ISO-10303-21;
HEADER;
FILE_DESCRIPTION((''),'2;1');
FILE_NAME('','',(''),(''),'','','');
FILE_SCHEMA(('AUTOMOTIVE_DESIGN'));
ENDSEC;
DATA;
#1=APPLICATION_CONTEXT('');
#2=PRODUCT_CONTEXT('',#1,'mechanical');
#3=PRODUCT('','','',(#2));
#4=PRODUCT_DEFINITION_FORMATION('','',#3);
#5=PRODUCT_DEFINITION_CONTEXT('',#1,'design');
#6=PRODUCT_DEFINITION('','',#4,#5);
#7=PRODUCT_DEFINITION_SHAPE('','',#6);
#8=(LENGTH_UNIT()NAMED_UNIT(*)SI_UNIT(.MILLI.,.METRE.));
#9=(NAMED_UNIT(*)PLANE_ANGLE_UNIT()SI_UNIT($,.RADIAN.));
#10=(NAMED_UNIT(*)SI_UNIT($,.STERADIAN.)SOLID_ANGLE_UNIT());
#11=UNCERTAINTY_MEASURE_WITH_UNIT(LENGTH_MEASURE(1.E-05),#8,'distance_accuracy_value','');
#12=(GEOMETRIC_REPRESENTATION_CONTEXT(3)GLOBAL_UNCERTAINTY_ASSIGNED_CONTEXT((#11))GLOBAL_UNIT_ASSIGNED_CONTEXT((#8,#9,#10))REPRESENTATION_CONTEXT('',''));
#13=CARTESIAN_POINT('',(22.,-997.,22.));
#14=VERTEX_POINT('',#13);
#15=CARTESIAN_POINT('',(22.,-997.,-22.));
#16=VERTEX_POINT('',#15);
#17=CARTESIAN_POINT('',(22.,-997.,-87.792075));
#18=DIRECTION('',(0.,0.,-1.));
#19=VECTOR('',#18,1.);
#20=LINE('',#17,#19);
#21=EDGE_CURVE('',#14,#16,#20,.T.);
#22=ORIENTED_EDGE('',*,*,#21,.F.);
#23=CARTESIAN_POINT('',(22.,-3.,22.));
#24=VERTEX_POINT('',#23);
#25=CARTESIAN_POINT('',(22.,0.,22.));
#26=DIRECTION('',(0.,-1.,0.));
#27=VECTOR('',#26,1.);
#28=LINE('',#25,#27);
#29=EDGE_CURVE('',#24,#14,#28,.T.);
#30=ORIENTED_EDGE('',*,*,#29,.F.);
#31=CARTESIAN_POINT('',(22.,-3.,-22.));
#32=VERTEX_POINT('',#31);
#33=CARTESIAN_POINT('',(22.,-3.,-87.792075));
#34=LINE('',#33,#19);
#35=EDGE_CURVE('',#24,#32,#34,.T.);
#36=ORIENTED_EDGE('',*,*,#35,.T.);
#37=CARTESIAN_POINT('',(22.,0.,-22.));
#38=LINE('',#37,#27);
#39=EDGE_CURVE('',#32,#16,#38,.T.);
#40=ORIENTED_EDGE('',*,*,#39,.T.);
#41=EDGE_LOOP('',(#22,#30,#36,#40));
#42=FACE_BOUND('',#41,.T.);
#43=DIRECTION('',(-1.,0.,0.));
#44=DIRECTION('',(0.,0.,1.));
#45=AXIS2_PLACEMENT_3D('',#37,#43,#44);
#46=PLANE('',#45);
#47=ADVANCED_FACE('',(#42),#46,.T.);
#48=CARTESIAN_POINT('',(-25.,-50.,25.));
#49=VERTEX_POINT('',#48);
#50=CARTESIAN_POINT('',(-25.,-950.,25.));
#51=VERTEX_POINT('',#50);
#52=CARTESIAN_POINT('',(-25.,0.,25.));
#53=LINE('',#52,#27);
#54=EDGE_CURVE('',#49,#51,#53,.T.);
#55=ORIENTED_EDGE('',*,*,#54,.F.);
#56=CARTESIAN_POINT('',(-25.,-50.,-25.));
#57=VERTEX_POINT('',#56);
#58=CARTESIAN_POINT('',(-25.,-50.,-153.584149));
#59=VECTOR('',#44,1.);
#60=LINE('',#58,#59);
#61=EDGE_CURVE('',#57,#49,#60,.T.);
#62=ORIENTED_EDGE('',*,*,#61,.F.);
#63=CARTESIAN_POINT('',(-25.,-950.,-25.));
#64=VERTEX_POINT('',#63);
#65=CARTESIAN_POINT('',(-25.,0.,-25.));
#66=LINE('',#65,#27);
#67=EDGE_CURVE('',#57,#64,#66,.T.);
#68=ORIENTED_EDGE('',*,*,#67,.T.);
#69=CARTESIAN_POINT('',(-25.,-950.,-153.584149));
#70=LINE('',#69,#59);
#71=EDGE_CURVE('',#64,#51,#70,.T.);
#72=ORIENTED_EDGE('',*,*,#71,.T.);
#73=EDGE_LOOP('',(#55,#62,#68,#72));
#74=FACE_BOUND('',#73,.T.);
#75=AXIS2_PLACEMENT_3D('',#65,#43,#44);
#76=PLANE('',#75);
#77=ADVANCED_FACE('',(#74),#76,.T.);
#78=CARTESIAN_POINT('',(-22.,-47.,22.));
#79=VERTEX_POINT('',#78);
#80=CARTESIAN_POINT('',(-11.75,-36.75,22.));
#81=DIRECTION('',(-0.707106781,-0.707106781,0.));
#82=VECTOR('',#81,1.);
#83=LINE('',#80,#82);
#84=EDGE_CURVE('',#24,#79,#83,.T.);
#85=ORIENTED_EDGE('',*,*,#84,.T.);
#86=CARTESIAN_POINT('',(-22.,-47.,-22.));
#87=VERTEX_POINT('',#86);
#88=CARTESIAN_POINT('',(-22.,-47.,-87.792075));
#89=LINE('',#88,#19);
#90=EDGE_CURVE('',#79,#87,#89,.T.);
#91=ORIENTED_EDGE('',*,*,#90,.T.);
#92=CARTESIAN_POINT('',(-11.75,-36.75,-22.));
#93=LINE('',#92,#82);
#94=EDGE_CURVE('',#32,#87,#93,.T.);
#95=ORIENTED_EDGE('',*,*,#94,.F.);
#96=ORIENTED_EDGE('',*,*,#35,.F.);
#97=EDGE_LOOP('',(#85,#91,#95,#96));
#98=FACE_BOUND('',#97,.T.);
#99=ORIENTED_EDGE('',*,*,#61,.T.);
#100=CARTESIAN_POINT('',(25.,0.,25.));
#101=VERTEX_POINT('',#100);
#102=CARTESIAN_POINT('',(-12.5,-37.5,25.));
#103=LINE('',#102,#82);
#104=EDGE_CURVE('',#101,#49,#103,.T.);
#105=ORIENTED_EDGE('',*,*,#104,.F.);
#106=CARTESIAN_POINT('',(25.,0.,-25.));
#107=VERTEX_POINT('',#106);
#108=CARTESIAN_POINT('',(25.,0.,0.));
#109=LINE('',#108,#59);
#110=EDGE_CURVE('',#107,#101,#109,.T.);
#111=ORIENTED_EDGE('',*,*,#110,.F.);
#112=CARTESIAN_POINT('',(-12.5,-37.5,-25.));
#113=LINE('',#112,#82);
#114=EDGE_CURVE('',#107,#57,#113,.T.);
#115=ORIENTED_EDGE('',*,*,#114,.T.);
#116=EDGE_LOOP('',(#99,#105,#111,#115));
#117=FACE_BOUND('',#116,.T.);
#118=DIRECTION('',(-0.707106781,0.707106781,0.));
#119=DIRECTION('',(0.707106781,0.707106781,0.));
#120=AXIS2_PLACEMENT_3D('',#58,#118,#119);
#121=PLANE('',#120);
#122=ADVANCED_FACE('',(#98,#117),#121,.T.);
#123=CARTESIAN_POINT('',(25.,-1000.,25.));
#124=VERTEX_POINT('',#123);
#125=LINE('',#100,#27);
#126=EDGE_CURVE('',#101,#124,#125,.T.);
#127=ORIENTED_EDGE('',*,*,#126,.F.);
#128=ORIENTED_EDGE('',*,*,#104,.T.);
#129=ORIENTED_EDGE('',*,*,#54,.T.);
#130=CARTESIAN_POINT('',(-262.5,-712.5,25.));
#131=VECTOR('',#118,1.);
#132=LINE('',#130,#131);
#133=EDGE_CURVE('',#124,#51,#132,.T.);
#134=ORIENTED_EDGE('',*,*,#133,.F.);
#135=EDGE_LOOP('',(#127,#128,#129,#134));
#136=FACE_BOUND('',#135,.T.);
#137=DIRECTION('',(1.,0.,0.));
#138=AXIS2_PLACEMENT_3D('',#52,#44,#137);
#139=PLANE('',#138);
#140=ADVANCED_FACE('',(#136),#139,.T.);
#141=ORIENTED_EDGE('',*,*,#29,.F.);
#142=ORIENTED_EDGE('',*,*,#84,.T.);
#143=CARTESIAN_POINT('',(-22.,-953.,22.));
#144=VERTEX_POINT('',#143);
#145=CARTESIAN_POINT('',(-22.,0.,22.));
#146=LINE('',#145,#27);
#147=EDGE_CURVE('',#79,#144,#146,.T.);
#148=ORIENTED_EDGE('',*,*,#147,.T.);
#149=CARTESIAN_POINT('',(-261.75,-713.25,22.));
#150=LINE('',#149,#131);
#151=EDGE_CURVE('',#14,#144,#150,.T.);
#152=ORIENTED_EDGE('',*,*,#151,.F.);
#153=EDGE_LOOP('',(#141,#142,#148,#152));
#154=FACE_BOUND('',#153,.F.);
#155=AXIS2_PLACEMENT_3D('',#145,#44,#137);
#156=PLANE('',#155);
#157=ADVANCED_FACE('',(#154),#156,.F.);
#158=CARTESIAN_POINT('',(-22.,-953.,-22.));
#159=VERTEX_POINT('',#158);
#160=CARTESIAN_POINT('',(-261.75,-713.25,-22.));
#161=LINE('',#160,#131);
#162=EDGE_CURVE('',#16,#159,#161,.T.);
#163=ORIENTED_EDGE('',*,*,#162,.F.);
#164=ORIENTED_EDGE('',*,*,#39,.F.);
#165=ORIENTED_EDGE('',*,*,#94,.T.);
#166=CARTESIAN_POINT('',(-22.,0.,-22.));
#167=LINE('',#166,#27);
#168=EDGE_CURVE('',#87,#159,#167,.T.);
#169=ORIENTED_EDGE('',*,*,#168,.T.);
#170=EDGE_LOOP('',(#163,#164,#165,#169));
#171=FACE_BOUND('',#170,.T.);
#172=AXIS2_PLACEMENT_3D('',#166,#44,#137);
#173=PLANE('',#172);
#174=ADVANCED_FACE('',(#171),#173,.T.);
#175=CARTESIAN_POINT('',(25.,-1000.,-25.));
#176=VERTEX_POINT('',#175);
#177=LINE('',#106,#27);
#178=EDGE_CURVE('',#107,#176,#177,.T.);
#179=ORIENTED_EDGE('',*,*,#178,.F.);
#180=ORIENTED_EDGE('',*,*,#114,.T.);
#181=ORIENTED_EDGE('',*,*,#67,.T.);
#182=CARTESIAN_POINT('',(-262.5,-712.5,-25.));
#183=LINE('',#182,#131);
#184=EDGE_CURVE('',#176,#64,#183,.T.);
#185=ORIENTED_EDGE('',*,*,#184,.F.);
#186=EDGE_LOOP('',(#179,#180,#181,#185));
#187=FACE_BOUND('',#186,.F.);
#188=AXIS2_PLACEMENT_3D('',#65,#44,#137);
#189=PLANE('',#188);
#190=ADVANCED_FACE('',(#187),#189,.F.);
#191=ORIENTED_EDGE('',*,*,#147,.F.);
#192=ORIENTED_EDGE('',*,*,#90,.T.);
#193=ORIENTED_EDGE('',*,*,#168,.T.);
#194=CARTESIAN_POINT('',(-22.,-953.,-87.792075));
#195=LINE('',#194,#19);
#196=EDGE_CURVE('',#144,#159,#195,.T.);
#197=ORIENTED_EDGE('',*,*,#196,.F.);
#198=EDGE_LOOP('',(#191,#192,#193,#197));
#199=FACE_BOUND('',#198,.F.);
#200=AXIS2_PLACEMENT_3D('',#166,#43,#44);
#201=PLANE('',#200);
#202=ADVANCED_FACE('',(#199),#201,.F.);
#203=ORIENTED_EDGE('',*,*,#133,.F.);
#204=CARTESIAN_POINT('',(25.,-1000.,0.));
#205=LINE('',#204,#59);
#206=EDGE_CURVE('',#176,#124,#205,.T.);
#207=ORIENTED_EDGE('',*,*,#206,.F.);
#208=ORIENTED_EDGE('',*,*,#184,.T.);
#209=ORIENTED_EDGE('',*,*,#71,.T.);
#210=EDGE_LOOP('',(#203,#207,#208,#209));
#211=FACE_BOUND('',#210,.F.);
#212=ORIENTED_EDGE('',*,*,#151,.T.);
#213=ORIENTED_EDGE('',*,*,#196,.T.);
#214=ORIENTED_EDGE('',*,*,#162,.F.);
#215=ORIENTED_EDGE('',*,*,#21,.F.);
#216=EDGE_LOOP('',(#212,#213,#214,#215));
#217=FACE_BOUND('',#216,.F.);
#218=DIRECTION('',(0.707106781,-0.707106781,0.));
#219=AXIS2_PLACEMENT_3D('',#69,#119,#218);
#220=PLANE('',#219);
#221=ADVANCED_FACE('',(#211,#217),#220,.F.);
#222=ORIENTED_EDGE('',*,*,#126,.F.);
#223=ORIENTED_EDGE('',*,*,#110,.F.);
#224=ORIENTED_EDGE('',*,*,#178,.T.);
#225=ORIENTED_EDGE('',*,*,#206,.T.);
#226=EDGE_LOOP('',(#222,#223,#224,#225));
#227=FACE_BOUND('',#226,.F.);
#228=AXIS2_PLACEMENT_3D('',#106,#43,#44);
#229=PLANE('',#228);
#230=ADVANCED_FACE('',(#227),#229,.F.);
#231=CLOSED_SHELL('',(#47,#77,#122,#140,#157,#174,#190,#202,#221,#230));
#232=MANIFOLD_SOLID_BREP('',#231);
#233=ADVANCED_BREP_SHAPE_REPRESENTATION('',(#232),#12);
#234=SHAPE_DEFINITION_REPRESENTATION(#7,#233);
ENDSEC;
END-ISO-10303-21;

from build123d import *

# Parameters (mm, degrees)
F0_W        = 50
F0_H        = 50
F0_W_2      = 44
F0_H_2      = 44
F1_DEPTH    = 1000
F2_T1_DEPTH = 307.1682987966


# Not quite as in the source:
# - a fillet or chamfer that OpenCascade refuses, or shapes differently, is made with other operations: its cross-section is extruded or revolved along the edge and cut away or added


with BuildPart() as f1:
    # F0 (on Front) → F1 (new body)
    with BuildSketch(Plane.XZ):
        Rectangle(F0_W, F0_H)
        Rectangle(F0_W_2, F0_H_2, mode=Mode.SUBTRACT)
    extrude(amount=F1_DEPTH)

    # F2: chamfer of 50 on 2 edges, made by hand

    # F2_s2 → F2_t1 (cut)
    with BuildSketch(Plane.XY.offset(-153.5841493983)):
        Polygon((-25, -950), (25, -1000), (-25, -1000), align=None)
        Polygon((-25, -50), (25, 0), (-25, 0), align=None)
    extrude(amount=F2_T1_DEPTH, mode=Mode.SUBTRACT)


solid = f1.part
